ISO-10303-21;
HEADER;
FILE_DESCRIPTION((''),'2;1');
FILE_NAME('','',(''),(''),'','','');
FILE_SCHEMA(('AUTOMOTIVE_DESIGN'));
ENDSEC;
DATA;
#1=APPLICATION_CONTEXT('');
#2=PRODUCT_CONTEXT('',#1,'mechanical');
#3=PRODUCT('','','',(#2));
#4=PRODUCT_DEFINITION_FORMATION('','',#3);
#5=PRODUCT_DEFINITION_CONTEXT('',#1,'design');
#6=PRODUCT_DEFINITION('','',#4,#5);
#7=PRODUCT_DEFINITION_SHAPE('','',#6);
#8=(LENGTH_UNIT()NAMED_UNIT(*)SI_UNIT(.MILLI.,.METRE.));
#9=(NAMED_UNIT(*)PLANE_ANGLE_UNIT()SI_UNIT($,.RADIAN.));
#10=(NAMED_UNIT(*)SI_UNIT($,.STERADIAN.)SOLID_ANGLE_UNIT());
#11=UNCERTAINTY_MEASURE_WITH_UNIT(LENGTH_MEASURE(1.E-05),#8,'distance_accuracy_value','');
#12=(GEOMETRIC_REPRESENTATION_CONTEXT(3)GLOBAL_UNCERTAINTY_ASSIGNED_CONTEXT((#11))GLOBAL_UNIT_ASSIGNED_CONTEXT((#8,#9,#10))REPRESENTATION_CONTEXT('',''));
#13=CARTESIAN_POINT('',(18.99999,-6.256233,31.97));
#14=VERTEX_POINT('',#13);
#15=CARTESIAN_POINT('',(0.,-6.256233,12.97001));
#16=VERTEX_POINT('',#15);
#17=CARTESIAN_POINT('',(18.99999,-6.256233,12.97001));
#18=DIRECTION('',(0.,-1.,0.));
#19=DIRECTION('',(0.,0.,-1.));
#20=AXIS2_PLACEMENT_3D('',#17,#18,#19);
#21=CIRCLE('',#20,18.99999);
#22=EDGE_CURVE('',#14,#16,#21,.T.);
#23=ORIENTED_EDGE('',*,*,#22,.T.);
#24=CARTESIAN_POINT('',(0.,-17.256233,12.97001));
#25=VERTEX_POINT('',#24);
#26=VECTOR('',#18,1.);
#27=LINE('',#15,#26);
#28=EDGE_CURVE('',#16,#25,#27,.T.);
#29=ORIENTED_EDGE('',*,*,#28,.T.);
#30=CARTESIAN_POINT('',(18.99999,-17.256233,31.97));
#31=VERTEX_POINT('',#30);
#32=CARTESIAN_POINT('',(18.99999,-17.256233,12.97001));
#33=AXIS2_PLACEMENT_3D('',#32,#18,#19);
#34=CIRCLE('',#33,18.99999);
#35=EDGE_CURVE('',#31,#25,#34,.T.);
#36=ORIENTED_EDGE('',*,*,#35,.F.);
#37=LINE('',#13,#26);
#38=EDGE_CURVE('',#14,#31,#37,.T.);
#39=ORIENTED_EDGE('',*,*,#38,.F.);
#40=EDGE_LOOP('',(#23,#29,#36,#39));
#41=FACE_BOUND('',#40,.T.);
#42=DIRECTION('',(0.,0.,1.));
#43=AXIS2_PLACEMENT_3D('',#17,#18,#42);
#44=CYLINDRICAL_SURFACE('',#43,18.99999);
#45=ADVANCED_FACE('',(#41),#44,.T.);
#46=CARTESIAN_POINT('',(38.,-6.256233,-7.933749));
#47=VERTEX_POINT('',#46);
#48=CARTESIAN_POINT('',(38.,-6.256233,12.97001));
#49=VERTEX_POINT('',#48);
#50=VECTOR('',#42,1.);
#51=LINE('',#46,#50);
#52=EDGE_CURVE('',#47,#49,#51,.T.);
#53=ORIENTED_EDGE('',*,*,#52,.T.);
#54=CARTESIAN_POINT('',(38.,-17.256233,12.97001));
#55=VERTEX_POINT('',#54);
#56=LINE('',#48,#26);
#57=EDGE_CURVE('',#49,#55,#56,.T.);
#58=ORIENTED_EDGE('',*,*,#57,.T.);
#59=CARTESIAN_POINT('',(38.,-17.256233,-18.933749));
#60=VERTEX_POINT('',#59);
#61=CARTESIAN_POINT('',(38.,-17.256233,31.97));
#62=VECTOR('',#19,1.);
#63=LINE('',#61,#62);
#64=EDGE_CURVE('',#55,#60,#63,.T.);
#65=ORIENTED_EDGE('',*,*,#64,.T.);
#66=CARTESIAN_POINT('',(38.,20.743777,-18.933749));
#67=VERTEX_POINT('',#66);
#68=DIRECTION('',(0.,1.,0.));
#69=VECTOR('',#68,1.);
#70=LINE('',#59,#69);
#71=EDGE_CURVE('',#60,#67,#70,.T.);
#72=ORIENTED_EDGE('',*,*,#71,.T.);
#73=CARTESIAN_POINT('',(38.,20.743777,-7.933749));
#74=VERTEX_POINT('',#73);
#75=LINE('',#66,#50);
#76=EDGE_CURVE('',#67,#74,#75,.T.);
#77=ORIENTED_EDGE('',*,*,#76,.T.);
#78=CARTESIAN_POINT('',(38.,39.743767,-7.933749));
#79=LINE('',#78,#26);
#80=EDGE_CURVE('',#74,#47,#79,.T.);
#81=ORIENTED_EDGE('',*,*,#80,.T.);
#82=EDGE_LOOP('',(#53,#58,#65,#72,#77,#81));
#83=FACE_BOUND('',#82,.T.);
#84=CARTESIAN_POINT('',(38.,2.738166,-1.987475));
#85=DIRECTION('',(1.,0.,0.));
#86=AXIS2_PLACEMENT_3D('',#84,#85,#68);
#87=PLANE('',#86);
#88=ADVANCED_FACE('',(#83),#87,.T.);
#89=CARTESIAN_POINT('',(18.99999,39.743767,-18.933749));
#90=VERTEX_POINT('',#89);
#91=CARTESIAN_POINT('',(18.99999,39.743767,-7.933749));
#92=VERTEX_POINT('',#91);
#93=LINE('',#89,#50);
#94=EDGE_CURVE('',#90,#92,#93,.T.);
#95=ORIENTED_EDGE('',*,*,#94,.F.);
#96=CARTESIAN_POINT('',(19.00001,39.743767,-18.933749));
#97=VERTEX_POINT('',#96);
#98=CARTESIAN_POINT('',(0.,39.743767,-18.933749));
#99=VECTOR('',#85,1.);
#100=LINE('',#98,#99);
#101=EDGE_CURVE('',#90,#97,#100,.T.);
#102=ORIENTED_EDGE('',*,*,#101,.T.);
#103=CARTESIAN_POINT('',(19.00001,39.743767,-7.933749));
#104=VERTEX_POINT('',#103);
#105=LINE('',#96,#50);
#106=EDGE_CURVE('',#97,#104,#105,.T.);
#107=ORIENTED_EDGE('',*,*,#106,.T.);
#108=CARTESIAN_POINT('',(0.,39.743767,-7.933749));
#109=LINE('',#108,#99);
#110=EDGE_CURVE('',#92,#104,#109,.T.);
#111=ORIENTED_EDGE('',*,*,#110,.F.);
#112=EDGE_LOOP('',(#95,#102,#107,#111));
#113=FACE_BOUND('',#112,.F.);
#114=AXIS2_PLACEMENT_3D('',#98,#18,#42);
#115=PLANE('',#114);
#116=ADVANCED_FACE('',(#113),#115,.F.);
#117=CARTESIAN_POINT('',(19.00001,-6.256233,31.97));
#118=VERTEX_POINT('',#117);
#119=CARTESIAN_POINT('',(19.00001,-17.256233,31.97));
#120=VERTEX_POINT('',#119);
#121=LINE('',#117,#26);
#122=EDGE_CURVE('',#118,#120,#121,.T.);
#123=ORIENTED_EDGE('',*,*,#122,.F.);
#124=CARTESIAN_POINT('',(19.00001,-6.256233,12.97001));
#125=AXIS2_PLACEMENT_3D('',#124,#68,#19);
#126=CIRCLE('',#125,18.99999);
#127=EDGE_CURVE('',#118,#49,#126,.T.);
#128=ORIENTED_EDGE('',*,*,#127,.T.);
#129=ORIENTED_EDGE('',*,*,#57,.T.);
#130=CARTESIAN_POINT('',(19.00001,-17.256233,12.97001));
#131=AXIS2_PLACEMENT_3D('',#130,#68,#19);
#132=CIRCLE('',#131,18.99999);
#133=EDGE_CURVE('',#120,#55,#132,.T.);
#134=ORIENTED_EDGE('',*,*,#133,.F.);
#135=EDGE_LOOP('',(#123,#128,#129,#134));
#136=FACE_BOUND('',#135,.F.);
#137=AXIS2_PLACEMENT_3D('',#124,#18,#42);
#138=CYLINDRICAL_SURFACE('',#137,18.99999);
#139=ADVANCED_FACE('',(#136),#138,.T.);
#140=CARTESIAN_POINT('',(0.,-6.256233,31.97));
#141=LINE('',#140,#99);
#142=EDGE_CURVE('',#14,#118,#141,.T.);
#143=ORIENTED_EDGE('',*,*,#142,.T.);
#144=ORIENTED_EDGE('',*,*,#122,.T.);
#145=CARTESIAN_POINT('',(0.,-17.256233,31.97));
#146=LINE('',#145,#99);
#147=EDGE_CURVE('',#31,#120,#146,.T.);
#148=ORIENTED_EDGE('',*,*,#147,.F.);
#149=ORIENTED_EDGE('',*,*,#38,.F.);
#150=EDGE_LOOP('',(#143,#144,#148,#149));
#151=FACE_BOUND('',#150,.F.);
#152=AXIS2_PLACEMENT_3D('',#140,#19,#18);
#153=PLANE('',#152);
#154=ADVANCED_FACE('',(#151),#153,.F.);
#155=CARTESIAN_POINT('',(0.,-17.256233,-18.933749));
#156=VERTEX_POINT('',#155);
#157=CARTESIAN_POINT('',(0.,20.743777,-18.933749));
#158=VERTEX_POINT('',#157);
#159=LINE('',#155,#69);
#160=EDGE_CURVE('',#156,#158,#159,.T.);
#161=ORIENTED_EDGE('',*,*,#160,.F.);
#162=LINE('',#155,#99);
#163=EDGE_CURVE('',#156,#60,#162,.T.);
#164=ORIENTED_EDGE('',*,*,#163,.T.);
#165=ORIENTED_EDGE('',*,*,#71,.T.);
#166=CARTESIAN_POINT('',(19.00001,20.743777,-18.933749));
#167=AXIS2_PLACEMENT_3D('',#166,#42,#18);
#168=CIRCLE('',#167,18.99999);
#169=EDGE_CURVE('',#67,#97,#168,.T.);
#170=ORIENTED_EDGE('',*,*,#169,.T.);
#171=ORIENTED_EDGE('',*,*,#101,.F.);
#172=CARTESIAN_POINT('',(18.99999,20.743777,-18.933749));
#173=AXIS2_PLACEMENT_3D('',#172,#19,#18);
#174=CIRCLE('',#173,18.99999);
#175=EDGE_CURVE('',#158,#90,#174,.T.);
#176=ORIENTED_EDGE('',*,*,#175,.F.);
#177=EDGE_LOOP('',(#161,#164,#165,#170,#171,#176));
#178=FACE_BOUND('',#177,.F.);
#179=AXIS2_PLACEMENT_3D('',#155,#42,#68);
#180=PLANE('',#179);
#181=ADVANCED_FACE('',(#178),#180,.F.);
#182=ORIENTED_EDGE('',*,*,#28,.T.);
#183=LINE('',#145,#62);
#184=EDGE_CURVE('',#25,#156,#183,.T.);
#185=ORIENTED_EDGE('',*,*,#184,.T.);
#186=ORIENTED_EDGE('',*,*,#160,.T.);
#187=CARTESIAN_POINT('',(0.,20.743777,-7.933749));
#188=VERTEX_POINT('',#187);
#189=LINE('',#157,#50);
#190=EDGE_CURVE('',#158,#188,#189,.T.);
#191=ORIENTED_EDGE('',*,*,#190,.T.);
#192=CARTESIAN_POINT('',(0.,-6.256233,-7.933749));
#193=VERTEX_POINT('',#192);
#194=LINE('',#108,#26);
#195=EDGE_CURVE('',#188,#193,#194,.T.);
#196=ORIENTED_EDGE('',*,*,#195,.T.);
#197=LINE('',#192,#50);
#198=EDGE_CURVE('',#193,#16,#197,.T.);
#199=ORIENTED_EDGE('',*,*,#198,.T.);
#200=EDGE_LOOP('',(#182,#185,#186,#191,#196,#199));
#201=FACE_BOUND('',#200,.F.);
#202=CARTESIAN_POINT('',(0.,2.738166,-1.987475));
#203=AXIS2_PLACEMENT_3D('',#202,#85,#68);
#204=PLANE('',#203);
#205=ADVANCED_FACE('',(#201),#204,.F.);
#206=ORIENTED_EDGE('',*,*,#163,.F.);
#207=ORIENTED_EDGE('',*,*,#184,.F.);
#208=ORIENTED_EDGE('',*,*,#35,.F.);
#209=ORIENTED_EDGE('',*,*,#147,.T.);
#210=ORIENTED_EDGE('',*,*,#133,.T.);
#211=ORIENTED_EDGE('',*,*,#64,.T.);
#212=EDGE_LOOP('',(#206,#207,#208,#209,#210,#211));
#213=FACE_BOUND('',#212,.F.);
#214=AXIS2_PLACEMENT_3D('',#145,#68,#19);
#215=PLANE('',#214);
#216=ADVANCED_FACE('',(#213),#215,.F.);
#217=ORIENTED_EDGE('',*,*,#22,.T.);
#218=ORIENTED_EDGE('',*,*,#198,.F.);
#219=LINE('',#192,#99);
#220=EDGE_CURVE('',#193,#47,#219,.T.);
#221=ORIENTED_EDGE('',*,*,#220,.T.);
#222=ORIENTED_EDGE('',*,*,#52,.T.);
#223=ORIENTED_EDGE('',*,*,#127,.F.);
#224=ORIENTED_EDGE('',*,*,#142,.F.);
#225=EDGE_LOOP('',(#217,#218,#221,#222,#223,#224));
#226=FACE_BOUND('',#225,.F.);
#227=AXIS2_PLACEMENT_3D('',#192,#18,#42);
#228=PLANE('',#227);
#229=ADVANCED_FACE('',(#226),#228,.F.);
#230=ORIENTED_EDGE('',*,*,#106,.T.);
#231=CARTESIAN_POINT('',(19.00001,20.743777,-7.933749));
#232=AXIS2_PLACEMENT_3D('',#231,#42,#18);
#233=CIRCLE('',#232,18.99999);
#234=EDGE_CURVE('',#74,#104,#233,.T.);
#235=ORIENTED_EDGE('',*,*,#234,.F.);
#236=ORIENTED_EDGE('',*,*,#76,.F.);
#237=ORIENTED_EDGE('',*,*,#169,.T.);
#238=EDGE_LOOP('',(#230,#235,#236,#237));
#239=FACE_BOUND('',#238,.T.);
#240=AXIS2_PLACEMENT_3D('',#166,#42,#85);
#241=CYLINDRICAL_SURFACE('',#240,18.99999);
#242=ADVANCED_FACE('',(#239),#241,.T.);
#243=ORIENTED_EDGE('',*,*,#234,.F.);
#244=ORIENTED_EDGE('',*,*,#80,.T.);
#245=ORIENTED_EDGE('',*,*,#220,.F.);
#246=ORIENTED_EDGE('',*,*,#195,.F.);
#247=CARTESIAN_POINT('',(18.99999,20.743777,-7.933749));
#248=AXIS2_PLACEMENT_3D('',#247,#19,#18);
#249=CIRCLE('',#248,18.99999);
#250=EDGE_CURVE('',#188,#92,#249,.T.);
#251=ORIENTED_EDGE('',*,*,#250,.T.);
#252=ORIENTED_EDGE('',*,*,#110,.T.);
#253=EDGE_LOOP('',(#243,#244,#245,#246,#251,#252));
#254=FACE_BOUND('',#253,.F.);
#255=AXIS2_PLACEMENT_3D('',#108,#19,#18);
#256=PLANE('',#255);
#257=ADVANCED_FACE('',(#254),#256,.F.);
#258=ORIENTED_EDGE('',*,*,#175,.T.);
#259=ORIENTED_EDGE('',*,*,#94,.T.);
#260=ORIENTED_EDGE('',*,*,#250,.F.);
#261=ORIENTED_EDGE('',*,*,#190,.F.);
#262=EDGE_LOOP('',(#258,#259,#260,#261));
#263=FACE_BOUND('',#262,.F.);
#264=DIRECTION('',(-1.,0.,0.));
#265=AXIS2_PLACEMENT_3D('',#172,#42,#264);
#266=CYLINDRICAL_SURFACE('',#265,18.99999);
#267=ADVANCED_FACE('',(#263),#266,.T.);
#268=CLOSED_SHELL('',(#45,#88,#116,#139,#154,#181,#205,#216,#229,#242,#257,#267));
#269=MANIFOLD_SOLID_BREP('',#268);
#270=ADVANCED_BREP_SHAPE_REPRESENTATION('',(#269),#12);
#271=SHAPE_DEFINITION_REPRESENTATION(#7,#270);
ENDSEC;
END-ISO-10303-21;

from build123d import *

# Parameters (mm, degrees)
F1_DEPTH = 38
F2_R     = 18.99999
F3_R     = 18.99999


# Not quite as in the source:
# - a fillet or chamfer is up to 0.001 mm smaller than in the source, because OpenCascade refuses the exact size


with BuildPart() as f1:
    # F0 (on Right) → F1 (new body)
    with BuildSketch(Plane.YZ):
        Polygon((-6.256232895, 31.9699999726), (-17.256232895, 31.9699999726), (-17.256232895, -18.9337489045), (39.743767105, -18.9337489045), (39.743767105, -7.9337489045), (-6.256232895, -7.9337489045), align=None)
    extrude(amount=F1_DEPTH)

    # F2 (radius 19 in the source; OpenCascade refuses exactly that, so slightly less here)
    f2_edges = [f1.edges().sort_by_distance(p)[0] for p in [
        (38, -11.756233, 31.97),
        (0, -11.756233, 31.97),
    ]]
    fillet(f2_edges, radius=F2_R)

    # F3 (radius 19 in the source; OpenCascade refuses exactly that, so slightly less here)
    f3_edges = [f1.edges().sort_by_distance(p)[0] for p in [
        (38, 39.743767, -13.433749),
        (0, 39.743767, -13.433749),
    ]]
    fillet(f3_edges, radius=F3_R)


solid = f1.part
